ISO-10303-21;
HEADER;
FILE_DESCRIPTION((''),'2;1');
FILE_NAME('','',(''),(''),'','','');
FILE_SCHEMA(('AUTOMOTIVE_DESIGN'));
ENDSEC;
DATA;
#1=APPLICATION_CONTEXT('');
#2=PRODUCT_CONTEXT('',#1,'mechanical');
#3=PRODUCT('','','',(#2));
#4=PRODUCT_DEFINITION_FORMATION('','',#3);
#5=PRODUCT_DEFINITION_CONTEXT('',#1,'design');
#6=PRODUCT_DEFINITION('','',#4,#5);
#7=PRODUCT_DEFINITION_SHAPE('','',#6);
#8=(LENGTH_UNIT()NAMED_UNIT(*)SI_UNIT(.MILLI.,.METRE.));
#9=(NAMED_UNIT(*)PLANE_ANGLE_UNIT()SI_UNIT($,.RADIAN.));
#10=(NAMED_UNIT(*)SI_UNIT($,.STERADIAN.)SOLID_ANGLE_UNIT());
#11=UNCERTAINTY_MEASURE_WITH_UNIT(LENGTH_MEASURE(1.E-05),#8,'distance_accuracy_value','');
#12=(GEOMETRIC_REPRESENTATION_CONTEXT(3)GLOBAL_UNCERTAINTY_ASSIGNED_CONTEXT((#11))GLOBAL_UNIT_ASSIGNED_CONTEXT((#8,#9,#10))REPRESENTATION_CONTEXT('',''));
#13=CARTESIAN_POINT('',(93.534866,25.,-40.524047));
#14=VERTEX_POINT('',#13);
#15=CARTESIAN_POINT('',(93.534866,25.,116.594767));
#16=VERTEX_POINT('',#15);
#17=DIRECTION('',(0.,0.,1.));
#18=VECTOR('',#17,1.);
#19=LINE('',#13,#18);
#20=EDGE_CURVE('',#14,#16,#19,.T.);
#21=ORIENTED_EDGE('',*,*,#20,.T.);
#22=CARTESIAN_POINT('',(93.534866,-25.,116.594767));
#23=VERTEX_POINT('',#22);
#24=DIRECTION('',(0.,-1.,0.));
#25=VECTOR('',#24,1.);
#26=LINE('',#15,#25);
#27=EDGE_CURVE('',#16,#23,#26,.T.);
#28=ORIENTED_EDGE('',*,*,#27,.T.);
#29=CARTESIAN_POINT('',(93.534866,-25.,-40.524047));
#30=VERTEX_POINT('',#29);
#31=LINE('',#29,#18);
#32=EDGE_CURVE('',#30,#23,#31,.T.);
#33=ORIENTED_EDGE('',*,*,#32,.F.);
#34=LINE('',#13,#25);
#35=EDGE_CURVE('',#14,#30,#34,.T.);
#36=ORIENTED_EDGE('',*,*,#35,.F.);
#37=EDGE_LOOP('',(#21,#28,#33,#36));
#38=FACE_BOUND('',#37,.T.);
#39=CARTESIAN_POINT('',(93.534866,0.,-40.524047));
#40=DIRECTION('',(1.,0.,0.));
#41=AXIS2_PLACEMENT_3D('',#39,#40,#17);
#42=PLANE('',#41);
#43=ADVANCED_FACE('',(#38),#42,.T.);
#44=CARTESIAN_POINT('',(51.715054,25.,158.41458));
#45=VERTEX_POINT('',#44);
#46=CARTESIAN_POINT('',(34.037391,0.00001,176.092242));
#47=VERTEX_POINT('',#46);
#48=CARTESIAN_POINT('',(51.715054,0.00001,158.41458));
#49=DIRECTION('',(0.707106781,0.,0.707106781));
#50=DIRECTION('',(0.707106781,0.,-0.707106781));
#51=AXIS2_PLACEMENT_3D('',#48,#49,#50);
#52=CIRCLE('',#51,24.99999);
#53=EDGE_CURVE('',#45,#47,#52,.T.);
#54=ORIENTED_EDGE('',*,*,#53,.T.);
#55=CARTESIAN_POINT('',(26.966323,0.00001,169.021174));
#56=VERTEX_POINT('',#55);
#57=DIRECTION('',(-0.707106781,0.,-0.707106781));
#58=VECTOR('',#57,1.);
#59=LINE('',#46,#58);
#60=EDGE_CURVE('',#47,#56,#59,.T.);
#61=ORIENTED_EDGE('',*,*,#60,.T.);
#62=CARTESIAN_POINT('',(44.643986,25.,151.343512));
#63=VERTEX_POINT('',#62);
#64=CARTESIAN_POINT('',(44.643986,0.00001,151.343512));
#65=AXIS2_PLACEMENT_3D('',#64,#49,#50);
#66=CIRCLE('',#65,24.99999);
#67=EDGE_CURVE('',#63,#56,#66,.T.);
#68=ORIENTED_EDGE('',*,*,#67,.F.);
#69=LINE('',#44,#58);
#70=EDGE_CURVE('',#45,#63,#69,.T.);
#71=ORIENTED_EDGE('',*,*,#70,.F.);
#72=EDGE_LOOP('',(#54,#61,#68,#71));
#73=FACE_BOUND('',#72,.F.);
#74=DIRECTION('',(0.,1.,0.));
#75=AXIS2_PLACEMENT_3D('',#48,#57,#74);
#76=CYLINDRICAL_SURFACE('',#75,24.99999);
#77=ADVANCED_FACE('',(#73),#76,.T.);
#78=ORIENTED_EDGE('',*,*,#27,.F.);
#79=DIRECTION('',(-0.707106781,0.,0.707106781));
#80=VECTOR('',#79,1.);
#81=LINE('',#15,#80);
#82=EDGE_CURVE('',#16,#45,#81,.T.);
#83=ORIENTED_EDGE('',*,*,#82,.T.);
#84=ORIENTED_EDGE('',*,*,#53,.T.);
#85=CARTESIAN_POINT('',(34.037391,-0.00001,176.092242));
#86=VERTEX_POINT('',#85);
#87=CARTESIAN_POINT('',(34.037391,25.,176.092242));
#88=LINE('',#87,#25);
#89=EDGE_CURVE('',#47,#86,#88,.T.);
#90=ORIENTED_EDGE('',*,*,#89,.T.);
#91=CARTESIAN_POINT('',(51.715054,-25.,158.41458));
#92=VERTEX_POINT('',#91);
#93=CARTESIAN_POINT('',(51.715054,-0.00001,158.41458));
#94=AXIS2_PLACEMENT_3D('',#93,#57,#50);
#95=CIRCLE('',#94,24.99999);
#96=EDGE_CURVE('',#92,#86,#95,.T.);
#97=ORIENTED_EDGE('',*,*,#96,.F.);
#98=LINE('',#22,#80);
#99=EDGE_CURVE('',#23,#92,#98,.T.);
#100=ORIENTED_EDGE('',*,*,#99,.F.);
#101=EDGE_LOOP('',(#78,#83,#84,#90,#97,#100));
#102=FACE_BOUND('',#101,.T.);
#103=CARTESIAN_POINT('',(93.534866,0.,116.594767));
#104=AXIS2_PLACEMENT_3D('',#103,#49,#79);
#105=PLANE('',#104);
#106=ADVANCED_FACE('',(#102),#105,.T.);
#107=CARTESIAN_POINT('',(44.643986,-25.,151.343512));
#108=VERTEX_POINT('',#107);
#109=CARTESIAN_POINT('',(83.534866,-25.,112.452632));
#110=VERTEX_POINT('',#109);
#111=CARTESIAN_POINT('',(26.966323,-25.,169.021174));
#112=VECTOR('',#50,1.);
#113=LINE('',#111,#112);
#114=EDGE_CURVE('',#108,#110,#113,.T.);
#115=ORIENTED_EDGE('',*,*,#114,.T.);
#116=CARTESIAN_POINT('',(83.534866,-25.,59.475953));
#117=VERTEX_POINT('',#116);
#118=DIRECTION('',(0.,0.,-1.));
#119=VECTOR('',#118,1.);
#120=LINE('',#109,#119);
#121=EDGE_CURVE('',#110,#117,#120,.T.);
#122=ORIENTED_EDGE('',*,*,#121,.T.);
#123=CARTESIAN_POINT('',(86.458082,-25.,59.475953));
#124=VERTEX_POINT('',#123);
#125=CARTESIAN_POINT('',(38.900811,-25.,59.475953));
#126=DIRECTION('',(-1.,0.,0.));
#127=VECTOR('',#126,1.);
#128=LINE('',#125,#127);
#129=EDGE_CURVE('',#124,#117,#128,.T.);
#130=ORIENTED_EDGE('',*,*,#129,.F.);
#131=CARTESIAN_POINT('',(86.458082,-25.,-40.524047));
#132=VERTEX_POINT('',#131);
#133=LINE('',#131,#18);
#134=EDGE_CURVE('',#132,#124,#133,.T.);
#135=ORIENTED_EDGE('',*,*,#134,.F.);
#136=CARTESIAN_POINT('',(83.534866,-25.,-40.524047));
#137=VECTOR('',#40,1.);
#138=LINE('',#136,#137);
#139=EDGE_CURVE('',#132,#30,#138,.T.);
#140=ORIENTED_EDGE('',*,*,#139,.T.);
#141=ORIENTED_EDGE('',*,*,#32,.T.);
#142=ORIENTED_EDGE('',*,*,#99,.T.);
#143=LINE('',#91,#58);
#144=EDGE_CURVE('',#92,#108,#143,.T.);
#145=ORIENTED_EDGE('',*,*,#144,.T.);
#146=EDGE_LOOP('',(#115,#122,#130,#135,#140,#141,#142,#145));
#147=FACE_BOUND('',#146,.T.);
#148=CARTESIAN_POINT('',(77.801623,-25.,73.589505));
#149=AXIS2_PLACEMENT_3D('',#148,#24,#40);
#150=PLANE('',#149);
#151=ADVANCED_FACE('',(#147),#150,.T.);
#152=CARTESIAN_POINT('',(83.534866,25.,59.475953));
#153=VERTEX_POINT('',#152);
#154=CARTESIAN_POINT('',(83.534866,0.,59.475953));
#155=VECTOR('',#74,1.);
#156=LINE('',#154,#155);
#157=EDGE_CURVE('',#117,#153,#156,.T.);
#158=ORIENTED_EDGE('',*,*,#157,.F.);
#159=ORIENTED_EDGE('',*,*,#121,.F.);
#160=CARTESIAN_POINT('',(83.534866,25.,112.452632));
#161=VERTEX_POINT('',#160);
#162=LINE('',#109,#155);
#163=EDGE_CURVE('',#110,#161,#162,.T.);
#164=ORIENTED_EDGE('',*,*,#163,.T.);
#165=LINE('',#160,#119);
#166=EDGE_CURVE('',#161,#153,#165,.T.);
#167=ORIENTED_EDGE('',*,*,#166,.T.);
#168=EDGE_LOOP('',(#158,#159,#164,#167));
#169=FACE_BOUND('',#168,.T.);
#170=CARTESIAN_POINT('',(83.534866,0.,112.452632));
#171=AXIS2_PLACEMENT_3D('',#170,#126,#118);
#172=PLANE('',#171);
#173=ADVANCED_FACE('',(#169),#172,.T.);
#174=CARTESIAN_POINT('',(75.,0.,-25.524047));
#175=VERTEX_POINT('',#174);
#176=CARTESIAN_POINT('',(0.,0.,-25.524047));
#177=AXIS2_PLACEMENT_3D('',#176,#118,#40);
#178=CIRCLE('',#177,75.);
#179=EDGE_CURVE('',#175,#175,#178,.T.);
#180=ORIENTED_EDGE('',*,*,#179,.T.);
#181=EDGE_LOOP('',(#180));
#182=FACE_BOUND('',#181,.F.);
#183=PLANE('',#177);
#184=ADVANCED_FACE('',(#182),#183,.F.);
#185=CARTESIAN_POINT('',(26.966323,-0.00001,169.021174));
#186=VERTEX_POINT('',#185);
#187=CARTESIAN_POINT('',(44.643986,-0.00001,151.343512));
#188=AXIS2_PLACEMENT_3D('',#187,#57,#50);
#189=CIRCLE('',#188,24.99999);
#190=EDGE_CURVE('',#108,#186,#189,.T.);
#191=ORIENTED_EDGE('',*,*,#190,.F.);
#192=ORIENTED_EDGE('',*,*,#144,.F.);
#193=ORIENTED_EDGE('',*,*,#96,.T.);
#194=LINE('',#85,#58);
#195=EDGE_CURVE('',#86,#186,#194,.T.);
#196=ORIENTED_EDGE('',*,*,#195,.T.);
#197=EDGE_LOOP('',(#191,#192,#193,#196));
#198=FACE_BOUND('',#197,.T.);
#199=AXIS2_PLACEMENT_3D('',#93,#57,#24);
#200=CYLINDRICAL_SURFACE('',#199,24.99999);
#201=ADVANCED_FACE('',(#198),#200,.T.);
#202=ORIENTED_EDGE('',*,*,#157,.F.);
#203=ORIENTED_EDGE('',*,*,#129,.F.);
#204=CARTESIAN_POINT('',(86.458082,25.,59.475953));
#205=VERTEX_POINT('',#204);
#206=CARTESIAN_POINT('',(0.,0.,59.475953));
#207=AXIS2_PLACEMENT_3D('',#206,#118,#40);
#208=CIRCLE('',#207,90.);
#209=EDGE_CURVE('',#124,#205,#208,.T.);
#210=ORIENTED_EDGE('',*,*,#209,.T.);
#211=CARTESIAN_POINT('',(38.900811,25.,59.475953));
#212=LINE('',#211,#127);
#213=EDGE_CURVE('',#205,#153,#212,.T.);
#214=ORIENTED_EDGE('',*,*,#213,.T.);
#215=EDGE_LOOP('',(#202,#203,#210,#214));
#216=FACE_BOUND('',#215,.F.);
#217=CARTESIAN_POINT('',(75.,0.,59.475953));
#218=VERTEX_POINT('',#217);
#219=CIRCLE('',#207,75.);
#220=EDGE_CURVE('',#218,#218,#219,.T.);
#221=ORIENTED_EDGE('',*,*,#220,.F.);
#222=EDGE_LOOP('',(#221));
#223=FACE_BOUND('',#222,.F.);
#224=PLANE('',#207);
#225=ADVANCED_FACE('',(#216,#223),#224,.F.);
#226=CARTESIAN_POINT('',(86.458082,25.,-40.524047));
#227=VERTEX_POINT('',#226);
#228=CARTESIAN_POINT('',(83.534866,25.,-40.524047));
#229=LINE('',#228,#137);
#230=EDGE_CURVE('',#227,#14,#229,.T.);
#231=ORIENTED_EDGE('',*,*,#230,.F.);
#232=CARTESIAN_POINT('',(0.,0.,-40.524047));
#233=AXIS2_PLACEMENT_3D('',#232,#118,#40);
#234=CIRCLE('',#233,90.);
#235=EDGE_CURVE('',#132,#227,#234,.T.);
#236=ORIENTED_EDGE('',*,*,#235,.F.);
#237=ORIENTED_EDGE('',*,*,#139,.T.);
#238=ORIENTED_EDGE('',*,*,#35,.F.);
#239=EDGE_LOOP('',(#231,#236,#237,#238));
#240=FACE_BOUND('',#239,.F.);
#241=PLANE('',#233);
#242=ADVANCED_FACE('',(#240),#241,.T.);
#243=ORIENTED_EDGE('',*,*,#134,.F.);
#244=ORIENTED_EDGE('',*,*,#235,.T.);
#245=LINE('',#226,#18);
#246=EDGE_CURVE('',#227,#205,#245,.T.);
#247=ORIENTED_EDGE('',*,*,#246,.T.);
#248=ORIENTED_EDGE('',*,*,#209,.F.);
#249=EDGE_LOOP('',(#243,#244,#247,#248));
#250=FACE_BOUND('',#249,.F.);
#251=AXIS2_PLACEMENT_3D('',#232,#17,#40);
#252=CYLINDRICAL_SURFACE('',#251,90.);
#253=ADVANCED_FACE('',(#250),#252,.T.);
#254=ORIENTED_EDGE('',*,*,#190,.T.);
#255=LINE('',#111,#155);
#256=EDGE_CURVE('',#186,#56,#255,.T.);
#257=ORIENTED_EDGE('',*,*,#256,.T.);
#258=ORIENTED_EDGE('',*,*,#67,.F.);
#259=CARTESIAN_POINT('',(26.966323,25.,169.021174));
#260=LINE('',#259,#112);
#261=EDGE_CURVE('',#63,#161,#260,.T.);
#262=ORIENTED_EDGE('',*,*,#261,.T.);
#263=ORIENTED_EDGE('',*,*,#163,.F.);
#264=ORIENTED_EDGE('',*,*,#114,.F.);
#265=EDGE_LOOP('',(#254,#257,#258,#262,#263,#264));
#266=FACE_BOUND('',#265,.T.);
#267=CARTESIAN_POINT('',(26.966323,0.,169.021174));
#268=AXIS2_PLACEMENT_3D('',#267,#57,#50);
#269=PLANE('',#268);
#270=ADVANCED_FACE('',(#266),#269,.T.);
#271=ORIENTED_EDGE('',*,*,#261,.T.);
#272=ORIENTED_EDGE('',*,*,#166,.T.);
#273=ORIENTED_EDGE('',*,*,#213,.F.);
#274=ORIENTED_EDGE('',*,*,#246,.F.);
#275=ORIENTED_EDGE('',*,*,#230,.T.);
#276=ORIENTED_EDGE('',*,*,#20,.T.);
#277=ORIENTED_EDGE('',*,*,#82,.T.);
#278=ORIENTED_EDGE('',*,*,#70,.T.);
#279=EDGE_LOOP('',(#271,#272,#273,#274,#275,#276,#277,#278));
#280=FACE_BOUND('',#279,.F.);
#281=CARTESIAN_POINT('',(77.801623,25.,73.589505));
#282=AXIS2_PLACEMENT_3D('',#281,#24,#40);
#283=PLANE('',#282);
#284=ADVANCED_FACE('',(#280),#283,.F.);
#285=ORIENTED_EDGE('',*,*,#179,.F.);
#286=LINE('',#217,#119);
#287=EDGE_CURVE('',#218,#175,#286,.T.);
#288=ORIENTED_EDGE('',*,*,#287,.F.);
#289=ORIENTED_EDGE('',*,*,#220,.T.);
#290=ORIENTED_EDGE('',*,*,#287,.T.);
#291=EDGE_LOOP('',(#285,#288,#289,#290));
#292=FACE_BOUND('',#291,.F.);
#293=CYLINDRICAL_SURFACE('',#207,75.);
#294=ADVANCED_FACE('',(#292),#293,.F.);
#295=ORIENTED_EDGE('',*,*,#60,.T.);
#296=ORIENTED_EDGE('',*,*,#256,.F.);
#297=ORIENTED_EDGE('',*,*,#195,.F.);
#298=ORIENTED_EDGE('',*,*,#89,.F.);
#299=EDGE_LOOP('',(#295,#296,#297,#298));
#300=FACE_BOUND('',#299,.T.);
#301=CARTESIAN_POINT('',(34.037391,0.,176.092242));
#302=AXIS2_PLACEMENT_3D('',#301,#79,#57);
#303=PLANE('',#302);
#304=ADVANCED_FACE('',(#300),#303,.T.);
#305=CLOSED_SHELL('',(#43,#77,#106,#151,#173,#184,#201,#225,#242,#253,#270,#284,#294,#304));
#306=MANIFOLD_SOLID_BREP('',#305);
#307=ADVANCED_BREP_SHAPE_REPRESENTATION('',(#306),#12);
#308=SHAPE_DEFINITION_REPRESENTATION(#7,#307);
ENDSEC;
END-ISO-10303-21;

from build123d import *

# Parameters (mm, degrees)
F3_DEPTH = 25
F4_R     = 24.99999


# Not quite as in the source:
# - a fillet or chamfer is up to 0.001 mm smaller than in the source, because OpenCascade refuses the exact size


with BuildPart() as f1:
    # F0 (on Front) → F1 (revolve)
    with BuildSketch(Plane.XZ):
        Polygon((75, -25.5240468681), (0, -25.5240468681), (0, -40.5240468681), (90, -40.5240468681), (90, 59.4759531319), (75, 59.4759531319), align=None)
    revolve(axis=Axis((0, 0, -33.0240468681), (0, 0, -1)))

    # F2 (on Front) → F3 (join, symmetric)
    with BuildSketch(Plane.XZ):
        Polygon((83.5348658891, -40.5240468681), (93.5348658891, -40.5240468681), (93.5348658891, 116.5947673723), (34.0373912061, 176.0922420554), (26.9663233942, 169.0211742435), (83.5348658891, 112.4526317486), align=None)
    extrude(amount=F3_DEPTH, both=True)

    # F4 (radius 25 in the source; OpenCascade refuses exactly that, so slightly less here)
    f4_edges = [f1.edges().sort_by_distance(p)[0] for p in [
        (30.501857, -25, 172.556708),
        (30.501857, 25, 172.556708),
    ]]
    fillet(f4_edges, radius=F4_R)


solid = f1.part
